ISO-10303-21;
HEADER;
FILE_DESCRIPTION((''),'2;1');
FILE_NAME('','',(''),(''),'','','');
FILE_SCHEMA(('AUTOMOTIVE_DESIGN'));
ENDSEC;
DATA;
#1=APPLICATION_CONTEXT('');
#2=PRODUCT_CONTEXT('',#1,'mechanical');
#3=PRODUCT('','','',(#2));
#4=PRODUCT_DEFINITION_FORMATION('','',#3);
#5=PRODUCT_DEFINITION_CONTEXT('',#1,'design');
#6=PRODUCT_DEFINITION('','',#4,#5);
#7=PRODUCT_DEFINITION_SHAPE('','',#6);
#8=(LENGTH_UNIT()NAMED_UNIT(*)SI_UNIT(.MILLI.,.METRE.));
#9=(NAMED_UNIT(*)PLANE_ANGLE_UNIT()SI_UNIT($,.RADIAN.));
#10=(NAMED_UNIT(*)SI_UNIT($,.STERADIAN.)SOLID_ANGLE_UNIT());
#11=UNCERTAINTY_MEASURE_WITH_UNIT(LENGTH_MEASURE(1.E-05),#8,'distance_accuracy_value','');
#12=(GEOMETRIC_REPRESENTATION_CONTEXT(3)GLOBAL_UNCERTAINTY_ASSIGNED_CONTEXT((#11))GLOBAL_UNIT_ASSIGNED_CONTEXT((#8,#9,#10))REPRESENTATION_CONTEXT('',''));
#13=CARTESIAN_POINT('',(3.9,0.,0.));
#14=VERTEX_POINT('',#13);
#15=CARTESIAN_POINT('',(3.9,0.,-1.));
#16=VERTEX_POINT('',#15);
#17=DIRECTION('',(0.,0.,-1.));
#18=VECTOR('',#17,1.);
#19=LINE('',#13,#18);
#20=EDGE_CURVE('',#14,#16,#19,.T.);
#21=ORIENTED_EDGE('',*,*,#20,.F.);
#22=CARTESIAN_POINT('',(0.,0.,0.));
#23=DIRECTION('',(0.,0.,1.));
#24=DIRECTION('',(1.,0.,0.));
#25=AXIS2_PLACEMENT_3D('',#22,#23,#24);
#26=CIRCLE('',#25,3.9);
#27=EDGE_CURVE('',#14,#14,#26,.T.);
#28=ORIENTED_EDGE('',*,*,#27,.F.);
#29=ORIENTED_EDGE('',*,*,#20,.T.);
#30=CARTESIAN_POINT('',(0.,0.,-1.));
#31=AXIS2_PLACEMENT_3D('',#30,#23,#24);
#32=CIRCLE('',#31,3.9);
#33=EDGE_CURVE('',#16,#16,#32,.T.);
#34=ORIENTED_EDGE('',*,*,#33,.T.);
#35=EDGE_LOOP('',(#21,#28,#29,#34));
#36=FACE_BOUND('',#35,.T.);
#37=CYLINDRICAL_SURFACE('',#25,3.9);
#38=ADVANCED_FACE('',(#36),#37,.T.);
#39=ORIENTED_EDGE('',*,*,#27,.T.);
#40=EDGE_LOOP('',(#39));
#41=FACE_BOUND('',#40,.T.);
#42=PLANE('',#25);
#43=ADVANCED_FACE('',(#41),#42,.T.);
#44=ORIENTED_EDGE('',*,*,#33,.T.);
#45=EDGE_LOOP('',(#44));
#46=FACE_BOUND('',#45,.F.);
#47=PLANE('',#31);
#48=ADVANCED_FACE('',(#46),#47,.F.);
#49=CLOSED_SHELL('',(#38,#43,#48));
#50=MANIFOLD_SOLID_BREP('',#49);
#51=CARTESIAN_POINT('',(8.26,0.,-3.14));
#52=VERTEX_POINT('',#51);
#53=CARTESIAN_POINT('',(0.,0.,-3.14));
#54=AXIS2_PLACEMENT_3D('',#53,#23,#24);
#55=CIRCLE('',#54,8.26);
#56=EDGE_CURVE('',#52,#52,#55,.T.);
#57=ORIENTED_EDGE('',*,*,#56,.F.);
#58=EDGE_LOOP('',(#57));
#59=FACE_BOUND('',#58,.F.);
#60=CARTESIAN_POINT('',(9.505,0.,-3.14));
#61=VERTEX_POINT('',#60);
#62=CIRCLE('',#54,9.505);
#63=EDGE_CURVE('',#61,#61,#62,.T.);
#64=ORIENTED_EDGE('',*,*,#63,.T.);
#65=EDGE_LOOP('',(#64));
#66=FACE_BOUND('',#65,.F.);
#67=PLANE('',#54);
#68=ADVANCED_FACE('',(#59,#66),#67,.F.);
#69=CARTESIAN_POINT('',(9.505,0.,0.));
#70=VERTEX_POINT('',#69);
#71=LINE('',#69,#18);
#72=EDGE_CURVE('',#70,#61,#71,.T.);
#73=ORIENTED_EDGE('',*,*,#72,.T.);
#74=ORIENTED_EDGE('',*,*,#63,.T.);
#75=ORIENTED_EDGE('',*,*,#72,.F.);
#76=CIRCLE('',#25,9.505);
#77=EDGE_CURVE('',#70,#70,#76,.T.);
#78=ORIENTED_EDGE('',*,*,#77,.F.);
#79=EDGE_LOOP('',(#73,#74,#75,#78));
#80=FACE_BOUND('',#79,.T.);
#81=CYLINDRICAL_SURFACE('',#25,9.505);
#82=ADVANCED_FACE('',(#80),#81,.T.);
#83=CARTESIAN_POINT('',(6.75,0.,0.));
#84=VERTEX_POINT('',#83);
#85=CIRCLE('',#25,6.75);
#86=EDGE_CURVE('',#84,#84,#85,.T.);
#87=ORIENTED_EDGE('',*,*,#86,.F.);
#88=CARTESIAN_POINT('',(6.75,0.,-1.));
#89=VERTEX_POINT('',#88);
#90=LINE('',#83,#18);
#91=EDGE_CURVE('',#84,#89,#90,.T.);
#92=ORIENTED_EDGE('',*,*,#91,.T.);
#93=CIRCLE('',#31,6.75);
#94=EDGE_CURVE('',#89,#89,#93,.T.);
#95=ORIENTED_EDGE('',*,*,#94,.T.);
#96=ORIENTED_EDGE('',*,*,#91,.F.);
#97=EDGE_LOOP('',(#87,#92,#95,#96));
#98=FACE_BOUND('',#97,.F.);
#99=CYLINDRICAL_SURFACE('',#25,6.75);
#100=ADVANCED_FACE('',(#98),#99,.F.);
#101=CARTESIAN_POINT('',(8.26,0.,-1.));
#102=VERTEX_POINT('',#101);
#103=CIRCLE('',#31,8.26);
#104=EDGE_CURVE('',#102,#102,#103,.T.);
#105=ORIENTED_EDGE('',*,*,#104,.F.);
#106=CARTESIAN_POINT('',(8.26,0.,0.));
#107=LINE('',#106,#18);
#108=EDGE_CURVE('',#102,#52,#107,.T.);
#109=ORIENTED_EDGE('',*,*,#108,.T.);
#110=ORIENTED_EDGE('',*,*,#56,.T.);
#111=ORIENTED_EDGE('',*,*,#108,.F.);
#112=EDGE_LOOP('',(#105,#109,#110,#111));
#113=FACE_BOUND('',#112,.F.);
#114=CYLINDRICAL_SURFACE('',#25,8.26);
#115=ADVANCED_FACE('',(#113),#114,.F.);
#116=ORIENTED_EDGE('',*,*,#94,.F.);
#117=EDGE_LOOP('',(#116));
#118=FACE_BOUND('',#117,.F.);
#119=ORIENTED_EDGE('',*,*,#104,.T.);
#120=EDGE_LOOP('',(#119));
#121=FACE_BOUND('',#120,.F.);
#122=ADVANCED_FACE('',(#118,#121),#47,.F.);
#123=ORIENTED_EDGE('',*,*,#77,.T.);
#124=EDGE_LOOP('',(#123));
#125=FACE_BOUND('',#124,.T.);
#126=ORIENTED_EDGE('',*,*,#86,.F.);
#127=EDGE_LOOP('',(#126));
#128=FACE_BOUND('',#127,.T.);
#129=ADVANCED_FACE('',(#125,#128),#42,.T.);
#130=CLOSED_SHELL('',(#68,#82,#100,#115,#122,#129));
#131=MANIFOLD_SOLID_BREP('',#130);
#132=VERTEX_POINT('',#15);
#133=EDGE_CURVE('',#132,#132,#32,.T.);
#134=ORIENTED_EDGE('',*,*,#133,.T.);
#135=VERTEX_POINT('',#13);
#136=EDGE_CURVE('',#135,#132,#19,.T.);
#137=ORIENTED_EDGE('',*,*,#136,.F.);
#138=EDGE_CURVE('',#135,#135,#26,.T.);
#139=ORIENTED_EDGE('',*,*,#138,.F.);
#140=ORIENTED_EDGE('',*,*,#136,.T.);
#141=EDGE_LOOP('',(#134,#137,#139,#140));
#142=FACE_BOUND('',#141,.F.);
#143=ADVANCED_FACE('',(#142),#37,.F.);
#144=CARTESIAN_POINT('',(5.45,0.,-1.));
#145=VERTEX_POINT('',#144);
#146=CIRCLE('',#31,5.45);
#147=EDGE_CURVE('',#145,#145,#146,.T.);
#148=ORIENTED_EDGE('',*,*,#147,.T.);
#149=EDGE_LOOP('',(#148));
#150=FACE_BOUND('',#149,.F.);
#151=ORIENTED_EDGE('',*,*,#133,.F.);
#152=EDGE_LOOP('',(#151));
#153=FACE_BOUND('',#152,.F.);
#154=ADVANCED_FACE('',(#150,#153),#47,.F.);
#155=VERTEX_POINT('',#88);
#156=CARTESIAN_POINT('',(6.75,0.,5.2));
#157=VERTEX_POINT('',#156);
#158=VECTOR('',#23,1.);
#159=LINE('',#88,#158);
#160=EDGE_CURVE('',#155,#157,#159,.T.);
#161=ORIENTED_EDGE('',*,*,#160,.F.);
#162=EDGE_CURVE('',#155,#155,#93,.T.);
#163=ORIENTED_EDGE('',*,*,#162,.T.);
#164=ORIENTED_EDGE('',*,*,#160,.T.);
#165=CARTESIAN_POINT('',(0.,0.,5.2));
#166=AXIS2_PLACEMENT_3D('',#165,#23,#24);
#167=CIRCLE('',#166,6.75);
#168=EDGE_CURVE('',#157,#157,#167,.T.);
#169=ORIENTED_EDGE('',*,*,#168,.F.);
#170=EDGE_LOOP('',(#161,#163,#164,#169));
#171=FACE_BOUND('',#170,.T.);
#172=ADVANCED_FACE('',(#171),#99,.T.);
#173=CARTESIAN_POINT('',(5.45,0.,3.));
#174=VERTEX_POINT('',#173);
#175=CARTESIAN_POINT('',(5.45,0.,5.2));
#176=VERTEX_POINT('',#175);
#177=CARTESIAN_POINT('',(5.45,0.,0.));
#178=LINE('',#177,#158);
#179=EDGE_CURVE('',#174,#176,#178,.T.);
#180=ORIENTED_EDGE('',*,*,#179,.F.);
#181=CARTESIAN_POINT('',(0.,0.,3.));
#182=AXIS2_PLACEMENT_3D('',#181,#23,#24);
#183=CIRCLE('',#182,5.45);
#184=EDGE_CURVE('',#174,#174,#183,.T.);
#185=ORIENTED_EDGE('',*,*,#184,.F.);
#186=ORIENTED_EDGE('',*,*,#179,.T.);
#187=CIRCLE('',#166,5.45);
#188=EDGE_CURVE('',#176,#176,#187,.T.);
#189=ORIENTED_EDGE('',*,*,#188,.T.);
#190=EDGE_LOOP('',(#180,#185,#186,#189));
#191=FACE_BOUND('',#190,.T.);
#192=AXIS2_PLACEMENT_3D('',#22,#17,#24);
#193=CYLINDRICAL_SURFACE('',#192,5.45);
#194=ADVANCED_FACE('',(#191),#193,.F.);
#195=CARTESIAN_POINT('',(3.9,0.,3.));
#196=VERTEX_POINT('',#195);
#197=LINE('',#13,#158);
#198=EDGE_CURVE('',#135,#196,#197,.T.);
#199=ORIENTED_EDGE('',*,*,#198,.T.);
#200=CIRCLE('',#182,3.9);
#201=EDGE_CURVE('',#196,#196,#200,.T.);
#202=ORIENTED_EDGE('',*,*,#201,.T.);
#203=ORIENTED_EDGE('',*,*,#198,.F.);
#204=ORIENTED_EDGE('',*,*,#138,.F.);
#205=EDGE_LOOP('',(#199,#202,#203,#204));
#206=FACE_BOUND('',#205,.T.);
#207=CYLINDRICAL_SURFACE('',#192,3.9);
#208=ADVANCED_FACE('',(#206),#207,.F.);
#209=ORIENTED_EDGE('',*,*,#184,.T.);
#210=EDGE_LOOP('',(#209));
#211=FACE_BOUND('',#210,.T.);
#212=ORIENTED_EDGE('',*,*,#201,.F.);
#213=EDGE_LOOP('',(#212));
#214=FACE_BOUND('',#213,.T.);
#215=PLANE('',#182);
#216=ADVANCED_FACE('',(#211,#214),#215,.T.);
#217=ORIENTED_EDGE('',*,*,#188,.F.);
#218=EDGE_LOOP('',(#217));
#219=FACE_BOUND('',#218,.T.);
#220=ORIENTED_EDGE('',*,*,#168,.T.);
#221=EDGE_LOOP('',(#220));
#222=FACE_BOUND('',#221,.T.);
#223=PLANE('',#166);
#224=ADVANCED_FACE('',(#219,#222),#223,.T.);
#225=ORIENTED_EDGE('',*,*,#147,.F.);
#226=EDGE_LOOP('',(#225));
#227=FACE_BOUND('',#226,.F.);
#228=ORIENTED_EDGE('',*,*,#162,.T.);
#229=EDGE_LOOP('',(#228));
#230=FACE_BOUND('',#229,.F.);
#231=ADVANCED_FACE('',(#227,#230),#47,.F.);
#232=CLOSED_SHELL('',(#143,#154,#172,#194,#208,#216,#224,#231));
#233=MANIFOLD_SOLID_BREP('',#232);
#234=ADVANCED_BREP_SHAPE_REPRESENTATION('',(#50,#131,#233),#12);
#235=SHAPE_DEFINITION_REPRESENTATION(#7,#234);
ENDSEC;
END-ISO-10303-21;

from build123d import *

# Parameters (mm, degrees)
F0_R          = 9.505
F0_R_2        = 8.26
F1_DEPTH      = 3.14
F0_R_3        = 6.75
F0_R_4        = 5.45
F2_DEPTH      = 5.2
F2_DEPTH_BACK = 1
F0_R_5        = 3.9
F3_DEPTH      = 3
F3_DEPTH_BACK = 1
F4_DEPTH      = 1


with BuildPart() as f1:
    # F0 (on Top) → F1 (new body)
    with BuildSketch(Plane.XY):
        Circle(F0_R)
        Circle(F0_R_2, mode=Mode.SUBTRACT)
    extrude(amount=-F1_DEPTH)

    # F0 (on Top) → F4 (join)
    with BuildSketch(Plane.XY):
        Circle(F0_R_2)
        Circle(F0_R_3, mode=Mode.SUBTRACT)
    extrude(amount=-F4_DEPTH)


with BuildPart() as f2:
    # F0 (on Top) → F2 (new body, two sides)
    with BuildSketch(Plane.XY) as f2_sk:
        Circle(F0_R_3)
        Circle(F0_R_4, mode=Mode.SUBTRACT)
    extrude(amount=F2_DEPTH)
    extrude(f2_sk.sketch, amount=-F2_DEPTH_BACK)

    # F0 (on Top) → F3 (join, two sides)
    with BuildSketch(Plane.XY) as f3_sk:
        Circle(F0_R_4)
        Circle(F0_R_5, mode=Mode.SUBTRACT)
    extrude(amount=F3_DEPTH)
    extrude(f3_sk.sketch, amount=-F3_DEPTH_BACK)


with BuildPart() as f4:
    # F0 (on Top) → F4, piece 2 (new body)
    with BuildSketch(Plane.XY):
        Circle(F0_R_5)
    extrude(amount=-F4_DEPTH)


solid = Compound([f1.part, f2.part, f4.part])
